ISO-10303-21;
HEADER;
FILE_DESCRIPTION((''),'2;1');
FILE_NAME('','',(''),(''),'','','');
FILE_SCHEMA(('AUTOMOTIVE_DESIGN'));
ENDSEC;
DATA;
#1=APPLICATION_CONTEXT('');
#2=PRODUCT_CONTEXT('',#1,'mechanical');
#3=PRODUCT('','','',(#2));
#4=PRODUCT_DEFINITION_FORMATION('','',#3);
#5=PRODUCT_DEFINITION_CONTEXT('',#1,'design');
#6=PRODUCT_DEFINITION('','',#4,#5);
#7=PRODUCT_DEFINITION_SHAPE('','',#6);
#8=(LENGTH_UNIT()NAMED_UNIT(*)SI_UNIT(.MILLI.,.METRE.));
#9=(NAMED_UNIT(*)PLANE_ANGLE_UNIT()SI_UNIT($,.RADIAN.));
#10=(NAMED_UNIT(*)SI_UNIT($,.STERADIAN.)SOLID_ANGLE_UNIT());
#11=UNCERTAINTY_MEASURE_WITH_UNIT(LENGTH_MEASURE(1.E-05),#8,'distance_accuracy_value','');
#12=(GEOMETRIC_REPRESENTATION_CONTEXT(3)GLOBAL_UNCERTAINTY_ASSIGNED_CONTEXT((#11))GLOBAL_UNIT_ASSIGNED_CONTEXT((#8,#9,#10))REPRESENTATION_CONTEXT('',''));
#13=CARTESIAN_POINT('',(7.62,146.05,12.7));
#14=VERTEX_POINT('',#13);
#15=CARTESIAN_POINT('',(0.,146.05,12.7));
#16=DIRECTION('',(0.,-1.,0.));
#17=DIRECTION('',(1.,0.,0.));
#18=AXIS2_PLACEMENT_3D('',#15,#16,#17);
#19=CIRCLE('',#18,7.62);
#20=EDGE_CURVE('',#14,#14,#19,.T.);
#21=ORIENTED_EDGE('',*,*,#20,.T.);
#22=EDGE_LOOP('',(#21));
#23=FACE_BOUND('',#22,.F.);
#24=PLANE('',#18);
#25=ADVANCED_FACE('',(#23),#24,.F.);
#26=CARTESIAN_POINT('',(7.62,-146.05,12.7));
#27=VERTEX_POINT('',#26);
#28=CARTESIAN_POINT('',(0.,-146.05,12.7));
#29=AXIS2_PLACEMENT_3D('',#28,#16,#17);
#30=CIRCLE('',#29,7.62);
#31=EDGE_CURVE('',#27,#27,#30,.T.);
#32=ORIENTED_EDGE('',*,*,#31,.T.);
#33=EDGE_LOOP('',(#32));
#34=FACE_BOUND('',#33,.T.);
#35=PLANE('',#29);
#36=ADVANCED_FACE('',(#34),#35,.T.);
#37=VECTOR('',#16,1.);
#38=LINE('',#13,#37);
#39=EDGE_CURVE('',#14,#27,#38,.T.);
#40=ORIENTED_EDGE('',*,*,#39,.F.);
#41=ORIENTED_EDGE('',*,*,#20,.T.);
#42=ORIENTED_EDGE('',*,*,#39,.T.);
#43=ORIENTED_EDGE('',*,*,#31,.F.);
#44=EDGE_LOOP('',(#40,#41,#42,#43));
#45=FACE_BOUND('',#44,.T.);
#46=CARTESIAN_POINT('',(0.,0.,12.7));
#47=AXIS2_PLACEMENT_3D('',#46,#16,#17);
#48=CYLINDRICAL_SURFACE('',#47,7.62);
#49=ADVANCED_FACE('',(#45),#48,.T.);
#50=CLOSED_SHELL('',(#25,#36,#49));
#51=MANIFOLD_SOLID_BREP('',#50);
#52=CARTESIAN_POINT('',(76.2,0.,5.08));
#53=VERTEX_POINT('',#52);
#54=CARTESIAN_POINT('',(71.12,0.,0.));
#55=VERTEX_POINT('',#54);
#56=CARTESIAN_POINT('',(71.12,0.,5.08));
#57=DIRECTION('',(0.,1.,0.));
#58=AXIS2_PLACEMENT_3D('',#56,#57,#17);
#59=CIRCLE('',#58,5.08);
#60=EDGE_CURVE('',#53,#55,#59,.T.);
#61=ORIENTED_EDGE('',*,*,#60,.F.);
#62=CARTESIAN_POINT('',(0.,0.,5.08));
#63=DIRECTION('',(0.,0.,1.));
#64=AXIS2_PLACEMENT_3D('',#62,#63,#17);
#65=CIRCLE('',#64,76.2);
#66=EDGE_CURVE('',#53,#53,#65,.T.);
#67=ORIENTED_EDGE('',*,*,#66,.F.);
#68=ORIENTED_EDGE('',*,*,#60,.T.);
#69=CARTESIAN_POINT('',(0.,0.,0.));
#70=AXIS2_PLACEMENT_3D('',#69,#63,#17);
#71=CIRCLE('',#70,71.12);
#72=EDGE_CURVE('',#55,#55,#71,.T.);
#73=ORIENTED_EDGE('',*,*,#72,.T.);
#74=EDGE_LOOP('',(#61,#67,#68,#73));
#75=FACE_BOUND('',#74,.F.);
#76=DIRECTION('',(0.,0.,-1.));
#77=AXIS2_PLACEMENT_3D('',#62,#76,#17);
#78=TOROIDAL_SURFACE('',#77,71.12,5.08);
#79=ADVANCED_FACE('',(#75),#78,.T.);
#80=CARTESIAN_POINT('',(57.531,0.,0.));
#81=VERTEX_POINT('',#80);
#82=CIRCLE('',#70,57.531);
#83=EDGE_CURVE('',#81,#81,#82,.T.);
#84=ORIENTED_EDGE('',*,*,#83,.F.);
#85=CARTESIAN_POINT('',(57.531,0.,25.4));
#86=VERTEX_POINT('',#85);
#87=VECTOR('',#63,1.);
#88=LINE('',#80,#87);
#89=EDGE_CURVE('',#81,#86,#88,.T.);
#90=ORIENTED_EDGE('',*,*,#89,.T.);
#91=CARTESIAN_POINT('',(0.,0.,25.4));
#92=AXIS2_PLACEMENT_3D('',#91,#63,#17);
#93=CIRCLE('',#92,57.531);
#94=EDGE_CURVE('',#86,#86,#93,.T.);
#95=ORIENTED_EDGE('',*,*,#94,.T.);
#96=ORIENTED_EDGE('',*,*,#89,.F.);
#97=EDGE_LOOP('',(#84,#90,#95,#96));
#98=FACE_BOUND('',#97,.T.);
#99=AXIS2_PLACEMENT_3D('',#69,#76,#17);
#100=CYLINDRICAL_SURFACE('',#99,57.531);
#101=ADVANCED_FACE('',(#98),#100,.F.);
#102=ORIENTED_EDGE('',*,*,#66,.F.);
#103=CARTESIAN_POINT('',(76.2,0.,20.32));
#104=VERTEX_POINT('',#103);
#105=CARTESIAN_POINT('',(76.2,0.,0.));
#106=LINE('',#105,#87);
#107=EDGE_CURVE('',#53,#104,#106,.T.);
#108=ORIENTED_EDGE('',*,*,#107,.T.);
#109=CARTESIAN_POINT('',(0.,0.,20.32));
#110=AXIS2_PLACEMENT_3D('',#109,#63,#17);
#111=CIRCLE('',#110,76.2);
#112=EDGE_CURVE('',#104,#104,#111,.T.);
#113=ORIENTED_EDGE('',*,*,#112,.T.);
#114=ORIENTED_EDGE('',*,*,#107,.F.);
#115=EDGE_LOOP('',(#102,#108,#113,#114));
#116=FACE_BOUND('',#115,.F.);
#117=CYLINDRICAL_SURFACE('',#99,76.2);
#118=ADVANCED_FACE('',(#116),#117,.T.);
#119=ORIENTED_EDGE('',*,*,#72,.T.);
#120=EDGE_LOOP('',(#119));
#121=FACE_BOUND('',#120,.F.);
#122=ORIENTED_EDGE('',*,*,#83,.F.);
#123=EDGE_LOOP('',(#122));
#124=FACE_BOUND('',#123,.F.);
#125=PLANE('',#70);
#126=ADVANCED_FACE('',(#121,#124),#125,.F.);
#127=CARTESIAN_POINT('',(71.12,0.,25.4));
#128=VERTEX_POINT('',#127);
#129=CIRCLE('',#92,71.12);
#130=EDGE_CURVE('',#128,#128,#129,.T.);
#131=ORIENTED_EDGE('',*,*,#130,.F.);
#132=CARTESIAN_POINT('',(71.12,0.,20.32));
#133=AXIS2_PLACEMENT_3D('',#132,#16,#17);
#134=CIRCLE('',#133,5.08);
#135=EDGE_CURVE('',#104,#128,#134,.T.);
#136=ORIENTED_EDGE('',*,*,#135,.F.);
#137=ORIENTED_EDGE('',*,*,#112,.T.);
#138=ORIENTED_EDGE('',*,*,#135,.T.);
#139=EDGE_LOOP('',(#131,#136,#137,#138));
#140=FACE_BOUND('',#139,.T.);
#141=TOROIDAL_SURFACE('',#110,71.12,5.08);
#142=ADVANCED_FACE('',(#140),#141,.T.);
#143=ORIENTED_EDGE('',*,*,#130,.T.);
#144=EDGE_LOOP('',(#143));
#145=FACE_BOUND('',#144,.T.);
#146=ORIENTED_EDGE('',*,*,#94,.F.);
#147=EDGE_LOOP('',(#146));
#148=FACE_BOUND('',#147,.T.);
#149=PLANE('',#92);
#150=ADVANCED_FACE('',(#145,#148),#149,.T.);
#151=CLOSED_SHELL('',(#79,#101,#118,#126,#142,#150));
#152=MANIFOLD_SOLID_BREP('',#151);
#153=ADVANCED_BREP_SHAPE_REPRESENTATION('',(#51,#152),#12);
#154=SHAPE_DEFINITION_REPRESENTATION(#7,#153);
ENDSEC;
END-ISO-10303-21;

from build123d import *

# Parameters (mm, degrees)
F0_R     = 76.2
F0_R_2   = 57.531
F1_DEPTH = 25.4
F2_R     = 5.08
F3_R     = 7.62
F4_DEPTH = 146.05
F5_DEPTH = 146.05


with BuildPart() as f1:
    # F0 (on Top) → F1 (new body)
    with BuildSketch(Plane.XY):
        Circle(F0_R)
        Circle(F0_R_2, mode=Mode.SUBTRACT)
    extrude(amount=F1_DEPTH)

    # F2
    f2_edges = [f1.edges().sort_by_distance(p)[0] for p in [
        (-76.2, 0, 25.4),
        (-76.2, 0, 0),
    ]]
    fillet(f2_edges, radius=F2_R)


with BuildPart() as f4:
    # F3 (on Front) → F4 (new body)
    with BuildSketch(Plane.XZ):
        with Locations((0, 12.7)):
            Circle(F3_R)
    extrude(amount=F4_DEPTH)

    # F5 (add): a face of the model
    f5_faces = [f4.faces().sort_by_distance(p)[0] for p in [
        (0, 0, 12.7),
    ]]
    extrude(f5_faces, amount=F5_DEPTH)


solid = Compound([f1.part, f4.part])
